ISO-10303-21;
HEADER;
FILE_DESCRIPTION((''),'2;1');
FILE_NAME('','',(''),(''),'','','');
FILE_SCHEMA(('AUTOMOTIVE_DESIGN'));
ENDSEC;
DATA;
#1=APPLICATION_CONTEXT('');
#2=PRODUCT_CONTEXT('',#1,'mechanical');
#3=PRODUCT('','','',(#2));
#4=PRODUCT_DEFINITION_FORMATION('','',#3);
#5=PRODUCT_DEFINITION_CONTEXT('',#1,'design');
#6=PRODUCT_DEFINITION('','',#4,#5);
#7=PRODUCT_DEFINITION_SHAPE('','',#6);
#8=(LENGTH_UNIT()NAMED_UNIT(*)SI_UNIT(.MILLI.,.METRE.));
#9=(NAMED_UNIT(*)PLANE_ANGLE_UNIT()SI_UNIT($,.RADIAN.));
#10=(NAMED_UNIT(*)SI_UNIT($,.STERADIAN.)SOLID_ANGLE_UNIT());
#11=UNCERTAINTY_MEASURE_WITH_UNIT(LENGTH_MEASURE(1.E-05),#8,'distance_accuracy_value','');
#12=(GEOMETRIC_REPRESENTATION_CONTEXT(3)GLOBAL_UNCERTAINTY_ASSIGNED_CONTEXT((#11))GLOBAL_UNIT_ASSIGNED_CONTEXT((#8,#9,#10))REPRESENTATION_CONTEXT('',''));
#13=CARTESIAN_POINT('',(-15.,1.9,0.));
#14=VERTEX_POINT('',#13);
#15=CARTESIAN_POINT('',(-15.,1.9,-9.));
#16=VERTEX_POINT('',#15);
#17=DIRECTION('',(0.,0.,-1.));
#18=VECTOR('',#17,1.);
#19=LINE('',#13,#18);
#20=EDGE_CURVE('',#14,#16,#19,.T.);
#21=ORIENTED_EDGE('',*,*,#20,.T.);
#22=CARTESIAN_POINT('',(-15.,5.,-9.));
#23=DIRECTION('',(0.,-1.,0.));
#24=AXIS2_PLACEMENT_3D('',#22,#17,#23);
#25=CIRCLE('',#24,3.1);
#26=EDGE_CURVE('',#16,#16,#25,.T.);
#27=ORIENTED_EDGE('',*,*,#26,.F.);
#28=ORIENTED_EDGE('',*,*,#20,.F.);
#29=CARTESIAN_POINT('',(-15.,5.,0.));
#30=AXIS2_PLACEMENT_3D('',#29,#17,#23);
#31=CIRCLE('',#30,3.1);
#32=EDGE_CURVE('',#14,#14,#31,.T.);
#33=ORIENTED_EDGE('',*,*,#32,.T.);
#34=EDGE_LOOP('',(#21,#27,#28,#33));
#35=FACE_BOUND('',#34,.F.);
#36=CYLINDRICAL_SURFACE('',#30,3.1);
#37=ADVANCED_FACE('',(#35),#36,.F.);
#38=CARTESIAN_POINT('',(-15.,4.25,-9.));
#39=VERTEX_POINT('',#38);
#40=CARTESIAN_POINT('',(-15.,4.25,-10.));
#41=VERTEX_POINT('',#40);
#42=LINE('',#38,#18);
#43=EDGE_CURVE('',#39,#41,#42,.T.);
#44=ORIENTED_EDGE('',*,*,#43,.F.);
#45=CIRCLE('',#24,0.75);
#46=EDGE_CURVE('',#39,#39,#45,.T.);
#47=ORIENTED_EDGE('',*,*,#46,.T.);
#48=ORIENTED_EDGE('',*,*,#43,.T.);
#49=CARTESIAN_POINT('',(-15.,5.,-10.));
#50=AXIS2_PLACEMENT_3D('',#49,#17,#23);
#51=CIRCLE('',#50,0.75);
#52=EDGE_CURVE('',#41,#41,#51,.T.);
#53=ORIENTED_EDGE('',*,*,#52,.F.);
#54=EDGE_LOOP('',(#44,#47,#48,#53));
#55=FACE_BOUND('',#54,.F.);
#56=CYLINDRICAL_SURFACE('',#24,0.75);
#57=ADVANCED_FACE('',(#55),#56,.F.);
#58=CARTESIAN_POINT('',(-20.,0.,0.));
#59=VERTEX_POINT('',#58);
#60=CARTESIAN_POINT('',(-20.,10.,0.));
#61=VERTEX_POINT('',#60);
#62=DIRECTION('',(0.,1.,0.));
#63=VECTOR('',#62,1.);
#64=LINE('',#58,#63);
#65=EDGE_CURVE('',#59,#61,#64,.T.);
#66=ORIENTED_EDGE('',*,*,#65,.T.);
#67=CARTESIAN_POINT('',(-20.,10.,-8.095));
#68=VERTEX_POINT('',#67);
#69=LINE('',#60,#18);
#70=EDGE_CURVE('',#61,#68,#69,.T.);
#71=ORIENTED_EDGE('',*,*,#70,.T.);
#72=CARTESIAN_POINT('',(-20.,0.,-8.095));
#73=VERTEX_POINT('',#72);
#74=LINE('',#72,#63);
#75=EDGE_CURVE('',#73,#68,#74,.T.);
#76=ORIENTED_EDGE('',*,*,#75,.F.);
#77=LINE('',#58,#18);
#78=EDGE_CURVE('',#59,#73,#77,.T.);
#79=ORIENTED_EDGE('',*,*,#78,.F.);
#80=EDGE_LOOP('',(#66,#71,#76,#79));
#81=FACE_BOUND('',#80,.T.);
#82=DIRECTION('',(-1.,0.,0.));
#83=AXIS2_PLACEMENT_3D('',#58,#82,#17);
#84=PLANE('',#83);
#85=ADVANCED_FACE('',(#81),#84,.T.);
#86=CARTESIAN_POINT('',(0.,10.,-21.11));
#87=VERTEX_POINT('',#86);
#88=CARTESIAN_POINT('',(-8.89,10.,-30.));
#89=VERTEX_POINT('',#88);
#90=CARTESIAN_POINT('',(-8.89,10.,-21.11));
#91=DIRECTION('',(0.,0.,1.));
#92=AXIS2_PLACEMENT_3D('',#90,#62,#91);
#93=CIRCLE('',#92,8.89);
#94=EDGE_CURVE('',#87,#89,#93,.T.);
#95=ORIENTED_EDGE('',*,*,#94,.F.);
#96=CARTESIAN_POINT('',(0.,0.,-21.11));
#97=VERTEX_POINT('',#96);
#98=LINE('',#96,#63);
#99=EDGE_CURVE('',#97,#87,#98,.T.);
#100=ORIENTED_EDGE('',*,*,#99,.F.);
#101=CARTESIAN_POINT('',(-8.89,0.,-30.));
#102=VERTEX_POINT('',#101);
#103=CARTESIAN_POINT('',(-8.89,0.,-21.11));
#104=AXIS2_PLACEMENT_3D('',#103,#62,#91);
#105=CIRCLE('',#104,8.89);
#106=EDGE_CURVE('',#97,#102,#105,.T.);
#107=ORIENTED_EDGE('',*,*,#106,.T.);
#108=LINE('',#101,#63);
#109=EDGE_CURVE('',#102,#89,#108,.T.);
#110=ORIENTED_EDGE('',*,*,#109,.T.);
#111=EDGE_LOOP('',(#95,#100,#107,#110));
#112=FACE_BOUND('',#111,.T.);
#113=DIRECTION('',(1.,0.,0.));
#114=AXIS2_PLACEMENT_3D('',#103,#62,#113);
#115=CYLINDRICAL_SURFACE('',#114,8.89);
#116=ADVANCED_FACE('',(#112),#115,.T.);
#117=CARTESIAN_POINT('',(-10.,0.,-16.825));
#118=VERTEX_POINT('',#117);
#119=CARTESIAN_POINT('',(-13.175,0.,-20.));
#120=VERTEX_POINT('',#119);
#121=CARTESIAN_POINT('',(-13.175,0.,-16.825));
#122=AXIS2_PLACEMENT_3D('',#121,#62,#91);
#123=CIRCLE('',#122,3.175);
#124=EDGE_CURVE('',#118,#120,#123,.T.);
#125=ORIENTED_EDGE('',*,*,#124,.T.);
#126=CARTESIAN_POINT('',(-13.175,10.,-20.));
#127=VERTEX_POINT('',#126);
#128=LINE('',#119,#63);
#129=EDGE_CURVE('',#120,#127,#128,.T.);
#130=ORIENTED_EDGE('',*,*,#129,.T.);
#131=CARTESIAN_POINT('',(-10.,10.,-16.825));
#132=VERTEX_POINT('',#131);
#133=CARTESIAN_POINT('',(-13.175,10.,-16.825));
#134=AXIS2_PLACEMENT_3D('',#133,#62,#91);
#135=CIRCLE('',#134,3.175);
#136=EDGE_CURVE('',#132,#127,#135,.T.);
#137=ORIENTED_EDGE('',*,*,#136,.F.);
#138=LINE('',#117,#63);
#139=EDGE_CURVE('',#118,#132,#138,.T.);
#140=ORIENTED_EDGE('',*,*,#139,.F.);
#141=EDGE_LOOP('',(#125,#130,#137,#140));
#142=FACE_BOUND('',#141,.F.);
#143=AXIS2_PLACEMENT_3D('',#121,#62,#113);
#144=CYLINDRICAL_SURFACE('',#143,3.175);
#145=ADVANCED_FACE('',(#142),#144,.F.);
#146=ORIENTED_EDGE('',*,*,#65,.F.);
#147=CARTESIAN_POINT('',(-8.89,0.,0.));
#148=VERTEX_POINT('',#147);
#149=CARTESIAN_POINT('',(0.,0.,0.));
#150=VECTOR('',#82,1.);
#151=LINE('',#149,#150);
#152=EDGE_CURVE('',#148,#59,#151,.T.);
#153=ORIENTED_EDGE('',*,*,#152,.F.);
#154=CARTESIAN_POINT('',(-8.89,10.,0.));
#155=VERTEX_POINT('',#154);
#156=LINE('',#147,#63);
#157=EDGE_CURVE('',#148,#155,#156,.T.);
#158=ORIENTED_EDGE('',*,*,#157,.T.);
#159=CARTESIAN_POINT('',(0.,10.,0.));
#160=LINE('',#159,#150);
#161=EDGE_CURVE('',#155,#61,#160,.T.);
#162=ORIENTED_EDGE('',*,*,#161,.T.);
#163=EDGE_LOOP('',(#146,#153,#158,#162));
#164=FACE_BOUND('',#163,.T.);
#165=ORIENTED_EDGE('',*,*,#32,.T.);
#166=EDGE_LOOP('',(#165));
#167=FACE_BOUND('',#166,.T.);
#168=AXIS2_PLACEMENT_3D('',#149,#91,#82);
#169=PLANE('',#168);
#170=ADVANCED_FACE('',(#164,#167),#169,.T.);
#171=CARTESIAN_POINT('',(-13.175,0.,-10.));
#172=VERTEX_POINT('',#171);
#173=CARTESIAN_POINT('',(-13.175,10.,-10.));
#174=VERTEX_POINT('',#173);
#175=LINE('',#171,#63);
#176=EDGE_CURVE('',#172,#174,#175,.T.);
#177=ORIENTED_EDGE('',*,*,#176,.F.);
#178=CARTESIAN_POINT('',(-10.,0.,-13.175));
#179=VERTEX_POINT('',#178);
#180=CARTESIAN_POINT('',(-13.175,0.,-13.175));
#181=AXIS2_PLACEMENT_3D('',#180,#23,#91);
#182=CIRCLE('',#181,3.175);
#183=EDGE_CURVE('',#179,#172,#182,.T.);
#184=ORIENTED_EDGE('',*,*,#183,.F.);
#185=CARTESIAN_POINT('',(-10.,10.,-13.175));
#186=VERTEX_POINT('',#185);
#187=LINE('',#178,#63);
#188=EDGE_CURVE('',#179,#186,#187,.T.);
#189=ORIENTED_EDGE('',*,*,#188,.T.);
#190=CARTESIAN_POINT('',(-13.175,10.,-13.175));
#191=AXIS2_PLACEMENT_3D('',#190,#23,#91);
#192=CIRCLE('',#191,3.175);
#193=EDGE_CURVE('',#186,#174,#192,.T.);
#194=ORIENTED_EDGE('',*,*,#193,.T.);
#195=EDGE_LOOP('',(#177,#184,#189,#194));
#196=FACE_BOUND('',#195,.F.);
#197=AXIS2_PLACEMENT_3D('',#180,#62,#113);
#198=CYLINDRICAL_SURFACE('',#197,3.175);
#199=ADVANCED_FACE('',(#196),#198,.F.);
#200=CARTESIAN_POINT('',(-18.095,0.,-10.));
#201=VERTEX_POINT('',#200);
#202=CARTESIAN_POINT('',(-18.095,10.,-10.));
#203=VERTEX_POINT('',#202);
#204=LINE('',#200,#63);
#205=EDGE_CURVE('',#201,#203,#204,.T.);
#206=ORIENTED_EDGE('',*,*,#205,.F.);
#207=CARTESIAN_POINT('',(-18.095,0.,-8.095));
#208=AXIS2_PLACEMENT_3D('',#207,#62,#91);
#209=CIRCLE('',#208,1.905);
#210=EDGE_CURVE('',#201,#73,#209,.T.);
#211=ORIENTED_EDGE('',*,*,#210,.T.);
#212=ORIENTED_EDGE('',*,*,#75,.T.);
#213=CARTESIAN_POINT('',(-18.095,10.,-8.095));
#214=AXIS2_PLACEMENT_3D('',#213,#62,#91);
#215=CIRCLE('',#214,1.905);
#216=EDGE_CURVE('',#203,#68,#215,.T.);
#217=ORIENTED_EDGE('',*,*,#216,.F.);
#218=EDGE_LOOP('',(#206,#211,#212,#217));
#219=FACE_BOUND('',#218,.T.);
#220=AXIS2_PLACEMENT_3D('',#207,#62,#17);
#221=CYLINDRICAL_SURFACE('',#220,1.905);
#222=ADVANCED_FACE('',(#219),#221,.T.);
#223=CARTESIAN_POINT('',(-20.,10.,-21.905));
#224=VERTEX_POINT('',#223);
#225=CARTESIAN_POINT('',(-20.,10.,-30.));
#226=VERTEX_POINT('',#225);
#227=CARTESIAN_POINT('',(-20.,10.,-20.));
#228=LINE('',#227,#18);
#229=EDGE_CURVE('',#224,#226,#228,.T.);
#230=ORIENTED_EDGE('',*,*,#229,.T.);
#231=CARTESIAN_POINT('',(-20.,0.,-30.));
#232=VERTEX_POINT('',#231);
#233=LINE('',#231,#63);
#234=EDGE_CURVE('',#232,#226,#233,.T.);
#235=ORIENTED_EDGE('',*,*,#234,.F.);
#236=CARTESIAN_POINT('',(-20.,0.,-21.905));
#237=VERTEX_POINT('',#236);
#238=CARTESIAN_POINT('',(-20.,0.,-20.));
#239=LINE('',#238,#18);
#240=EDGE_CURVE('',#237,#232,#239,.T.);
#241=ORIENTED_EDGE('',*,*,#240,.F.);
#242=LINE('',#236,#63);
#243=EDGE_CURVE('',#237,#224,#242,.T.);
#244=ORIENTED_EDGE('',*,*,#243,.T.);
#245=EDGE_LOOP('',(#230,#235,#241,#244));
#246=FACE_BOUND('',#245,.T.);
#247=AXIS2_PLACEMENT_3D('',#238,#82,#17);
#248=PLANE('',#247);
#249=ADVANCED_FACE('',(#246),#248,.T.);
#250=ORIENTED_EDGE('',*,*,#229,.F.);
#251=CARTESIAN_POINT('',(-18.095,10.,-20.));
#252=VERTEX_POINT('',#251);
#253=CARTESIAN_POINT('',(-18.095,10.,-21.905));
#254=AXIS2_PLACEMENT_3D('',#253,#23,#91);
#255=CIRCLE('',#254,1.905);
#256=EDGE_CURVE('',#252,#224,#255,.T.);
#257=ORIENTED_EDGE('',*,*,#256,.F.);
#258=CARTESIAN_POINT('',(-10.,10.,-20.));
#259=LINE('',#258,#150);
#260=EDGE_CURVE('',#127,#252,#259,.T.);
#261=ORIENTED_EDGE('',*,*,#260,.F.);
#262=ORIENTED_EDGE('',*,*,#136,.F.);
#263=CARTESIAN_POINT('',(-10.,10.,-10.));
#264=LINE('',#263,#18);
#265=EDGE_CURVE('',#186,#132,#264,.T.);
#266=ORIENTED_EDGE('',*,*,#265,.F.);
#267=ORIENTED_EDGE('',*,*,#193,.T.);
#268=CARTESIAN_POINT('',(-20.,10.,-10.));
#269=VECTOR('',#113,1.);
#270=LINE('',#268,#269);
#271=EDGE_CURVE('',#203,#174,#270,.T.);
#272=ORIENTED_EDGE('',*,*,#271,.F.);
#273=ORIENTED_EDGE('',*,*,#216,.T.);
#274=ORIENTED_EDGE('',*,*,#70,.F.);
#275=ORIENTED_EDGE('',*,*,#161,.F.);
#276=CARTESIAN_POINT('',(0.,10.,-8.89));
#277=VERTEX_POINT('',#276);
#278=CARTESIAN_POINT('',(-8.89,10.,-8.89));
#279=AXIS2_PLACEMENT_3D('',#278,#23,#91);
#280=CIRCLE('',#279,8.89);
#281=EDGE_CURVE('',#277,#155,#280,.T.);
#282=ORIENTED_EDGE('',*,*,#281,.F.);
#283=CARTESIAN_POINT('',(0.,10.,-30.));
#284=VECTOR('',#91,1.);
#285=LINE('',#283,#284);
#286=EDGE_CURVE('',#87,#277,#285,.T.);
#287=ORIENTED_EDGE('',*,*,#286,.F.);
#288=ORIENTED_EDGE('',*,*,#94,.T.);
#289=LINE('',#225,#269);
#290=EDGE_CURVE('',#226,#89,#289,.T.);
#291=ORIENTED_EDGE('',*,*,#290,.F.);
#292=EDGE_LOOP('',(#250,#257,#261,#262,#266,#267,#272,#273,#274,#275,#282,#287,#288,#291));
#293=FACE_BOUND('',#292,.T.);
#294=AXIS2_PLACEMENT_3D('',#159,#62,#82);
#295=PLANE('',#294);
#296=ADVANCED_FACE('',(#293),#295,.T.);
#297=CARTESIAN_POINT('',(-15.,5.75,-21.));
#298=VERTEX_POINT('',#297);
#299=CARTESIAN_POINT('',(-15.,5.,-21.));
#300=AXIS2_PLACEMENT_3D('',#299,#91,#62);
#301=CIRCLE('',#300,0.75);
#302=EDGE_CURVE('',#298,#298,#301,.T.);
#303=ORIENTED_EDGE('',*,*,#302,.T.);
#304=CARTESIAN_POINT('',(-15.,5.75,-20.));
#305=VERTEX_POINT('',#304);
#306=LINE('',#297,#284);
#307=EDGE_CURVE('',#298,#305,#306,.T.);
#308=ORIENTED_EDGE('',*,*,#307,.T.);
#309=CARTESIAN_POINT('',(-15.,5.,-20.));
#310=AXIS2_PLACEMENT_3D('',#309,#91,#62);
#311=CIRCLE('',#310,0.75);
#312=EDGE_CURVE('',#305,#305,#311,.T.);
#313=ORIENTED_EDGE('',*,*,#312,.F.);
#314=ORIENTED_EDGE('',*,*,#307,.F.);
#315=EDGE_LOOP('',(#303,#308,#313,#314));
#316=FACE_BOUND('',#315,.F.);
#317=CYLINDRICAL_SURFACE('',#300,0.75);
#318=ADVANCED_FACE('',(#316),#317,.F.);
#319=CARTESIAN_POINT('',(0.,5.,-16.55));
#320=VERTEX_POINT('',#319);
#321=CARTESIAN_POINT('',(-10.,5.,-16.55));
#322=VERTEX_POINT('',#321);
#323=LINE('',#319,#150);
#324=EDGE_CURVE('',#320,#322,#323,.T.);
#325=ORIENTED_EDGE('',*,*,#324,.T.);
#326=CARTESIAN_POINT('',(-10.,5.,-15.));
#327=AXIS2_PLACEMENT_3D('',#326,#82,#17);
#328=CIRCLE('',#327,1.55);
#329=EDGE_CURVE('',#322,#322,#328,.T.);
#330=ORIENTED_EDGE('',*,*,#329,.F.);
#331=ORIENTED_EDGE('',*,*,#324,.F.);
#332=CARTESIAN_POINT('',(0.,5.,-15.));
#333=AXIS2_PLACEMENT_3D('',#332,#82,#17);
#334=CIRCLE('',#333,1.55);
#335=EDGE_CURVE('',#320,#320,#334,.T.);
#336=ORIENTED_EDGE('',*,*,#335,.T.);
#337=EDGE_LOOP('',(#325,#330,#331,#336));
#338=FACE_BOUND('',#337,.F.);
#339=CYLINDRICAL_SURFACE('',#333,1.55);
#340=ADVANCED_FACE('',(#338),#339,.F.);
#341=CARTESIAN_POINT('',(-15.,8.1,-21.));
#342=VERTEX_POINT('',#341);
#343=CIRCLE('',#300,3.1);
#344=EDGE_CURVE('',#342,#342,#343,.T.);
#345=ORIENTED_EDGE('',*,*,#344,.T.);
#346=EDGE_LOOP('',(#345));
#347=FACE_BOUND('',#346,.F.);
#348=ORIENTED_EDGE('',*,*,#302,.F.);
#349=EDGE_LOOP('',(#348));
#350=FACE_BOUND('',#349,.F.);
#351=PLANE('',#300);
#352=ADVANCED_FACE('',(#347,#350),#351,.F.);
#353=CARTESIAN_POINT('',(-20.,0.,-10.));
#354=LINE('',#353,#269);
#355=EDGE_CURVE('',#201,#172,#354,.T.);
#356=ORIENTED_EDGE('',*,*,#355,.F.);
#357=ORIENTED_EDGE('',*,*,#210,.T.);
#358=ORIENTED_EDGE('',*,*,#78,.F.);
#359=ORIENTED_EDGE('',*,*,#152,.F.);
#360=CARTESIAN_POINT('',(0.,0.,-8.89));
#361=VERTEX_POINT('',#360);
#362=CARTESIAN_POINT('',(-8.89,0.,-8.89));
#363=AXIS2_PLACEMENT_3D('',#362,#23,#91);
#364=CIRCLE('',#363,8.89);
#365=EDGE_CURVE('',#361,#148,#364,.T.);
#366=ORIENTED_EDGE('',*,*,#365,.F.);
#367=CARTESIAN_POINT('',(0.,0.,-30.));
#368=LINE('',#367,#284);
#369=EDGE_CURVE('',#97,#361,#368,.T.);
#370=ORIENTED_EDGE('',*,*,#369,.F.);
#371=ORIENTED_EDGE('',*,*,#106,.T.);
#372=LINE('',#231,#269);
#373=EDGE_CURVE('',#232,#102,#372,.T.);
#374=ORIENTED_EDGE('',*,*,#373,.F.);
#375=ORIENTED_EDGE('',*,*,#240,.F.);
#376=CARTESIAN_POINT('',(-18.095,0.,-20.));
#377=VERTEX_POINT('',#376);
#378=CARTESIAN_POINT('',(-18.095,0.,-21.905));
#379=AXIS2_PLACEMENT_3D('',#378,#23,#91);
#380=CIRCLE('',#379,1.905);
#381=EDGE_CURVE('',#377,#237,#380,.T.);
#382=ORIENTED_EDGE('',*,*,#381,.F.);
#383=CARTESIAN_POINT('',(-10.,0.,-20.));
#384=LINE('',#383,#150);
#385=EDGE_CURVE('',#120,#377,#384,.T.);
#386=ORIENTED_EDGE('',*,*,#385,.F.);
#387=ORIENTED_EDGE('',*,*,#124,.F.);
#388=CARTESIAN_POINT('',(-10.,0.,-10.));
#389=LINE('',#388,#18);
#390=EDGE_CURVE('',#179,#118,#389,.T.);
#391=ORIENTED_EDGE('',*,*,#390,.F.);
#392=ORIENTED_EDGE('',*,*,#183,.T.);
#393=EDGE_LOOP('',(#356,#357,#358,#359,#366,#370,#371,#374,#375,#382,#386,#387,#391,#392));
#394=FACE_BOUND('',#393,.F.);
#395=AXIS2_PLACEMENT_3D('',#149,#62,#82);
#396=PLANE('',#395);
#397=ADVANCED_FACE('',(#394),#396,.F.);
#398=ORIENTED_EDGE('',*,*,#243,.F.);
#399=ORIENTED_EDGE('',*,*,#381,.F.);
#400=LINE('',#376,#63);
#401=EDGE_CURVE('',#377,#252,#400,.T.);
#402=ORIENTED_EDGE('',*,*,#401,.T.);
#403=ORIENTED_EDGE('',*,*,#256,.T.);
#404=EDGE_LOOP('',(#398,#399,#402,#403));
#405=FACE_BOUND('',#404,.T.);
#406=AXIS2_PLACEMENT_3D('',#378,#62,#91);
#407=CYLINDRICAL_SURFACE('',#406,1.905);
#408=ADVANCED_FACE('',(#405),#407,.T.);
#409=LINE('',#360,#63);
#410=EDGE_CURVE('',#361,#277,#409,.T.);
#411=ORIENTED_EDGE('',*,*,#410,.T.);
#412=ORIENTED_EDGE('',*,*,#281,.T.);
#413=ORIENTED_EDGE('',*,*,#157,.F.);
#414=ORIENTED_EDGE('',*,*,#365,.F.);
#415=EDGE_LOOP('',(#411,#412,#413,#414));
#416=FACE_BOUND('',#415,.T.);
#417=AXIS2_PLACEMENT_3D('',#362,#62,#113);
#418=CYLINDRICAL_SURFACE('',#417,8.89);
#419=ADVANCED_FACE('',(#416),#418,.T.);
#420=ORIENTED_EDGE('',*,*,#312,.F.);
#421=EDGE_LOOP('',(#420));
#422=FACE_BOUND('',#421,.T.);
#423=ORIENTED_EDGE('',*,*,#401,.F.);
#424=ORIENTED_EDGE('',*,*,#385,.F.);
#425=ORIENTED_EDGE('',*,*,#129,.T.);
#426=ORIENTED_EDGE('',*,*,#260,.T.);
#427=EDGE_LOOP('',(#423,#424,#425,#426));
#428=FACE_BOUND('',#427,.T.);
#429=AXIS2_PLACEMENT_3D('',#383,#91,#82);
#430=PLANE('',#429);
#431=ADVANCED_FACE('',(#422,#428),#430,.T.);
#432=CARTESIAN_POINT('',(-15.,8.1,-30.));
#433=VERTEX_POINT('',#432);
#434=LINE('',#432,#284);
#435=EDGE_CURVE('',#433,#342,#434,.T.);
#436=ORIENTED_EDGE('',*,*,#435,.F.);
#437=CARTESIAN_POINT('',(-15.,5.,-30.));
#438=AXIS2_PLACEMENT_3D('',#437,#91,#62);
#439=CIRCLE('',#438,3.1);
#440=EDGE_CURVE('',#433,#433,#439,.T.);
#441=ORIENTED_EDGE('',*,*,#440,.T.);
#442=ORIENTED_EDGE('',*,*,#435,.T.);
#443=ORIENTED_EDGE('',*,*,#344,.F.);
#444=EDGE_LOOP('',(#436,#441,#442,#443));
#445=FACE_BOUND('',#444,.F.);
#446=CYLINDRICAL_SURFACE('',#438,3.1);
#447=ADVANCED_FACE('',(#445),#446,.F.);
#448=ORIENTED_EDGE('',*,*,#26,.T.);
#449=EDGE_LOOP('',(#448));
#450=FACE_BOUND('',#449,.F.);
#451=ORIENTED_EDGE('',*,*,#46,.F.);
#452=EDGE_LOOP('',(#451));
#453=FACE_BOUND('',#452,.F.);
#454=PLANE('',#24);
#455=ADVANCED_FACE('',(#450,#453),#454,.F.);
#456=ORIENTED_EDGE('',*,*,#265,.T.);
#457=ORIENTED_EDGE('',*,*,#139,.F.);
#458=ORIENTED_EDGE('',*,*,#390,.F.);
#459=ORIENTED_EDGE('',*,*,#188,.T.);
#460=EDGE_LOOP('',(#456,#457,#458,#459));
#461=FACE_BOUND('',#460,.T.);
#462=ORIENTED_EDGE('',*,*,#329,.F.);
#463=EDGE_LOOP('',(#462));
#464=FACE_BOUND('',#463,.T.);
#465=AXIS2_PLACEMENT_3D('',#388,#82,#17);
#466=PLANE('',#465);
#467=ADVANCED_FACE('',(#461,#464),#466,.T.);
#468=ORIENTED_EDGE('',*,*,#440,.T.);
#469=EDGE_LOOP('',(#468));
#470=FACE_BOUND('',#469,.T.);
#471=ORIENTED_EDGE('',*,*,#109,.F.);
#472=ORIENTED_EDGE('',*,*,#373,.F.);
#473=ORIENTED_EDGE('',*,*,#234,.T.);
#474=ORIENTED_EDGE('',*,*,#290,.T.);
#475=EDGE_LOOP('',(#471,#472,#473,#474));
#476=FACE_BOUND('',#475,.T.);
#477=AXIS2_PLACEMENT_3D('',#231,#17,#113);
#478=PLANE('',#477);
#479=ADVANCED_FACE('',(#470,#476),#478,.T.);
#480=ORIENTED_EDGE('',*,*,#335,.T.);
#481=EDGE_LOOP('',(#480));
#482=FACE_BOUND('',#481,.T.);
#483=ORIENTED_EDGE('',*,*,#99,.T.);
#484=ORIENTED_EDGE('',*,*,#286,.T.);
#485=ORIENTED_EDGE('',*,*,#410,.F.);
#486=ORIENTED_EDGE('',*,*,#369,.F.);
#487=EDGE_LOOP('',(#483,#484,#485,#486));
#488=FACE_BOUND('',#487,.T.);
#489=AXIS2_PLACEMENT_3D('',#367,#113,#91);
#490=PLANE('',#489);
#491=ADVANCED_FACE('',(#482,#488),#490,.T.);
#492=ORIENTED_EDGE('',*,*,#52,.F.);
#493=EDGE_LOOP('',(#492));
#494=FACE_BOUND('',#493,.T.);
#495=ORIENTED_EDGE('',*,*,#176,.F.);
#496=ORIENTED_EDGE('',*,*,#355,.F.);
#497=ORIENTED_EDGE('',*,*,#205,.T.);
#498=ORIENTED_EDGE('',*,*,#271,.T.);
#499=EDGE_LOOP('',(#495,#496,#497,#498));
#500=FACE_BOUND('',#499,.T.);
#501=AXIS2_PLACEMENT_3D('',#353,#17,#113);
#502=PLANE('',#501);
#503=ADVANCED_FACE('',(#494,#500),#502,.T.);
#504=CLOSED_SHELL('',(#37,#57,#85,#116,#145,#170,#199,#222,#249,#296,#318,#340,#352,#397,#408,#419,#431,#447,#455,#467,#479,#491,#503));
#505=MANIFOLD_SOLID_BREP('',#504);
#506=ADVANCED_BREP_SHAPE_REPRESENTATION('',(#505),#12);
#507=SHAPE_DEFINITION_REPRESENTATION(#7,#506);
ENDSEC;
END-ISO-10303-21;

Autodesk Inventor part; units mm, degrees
ref_plane "YZ Plane" through (0, 0, 0) normal (1, 0, 0) x (0, 1, 0)
ref_plane "XZ Plane" through (0, 0, 0) normal (0, 1, 0) x (-1, 0, 0)
ref_plane "XY Plane" through (0, 0, 0) normal (0, 0, 1) x (1, 0, 0)
sketch "Sketch1" plane through (0, 0, 0) normal (0, 1, 0) x (-1, 0, 0)
  line L0 (0, 0) -> (20, 0)
  line L1 (20, -30) -> (0, -30)
  line L2 (0, -30) -> (0, 0)
  line L3 (20, 0) -> (20, -10)
  line L4 (20, -10) -> (10, -10)
  line L5 (10, -10) -> (10, -20)
  line L6 (10, -20) -> (20, -20)
  line L7 (20, -20) -> (20, -30)
  dimension "d0" = 20
  dimension "d1" = 30
  dimension "d2" = 10
  dimension "d3" = 10
  dimension "d4" = 10
  dimension "d5" = 10
  dimension "d8" = 20
extrude "Extrusion1" add sketch "Sketch1" along normal blind 10
sketch "Sketch2" plane through (-20, 0, 0) normal (0, 0, 1) x (1, 0, 0)
  line L0 (0, 0) -> (0, 10) projected
  line L1 (0, 10) -> (20, 10) projected
  point P0 (20, 0)
  point P1 (5, 5)
  dimension "d16" = 5
  dimension "d17" = 5
hole "Hole1" at (-15, 5, 0) direction (0, 0, -1) diameter 1.5 depth 11 counterbore diameter 6.2 counterbore depth 9
sketch "Sketch3" plane through (0, 0, -30) normal (0, 0, -1) x (-1, 0, 0)
  line L0 (20, 0) -> (20, 10) projected
  line L1 (0, 10) -> (20, 10) projected
  point P0 (0, 0)
  point P1 (15, 5)
  dimension "d25" = 5
  dimension "d26" = 5
hole "Hole2" at (-15, 5, -30) direction (0, 0, 1) diameter 1.5 depth 11 counterbore diameter 6.2 counterbore depth 9
sketch "Sketch4" plane through (0, 0, 0) normal (1, 0, 0) x (0, 0, -1)
  line L0 (0, 10) -> (30, 10) projected
  line L1 (30, 0) -> (30, 10) projected
  point P0 (0, 0)
  point P1 (15, 5)
  dimension "d34" = 5
  dimension "d35" = 15
hole "Hole3" at (0, 5, -15) direction (-1, 0, 0) diameter 3.1 depth 20
fillet "Fillet1" radius 3.175 1 edges at (-10, 5, -20)
fillet "Fillet2" radius 3.175 1 edges at (-10, 5, -10)
fillet "Fillet3" radius 1.905 1 edges at (-20, 5, -20)
fillet "Fillet4" radius 1.905 1 edges at (-20, 5, -10)
fillet "Fillet5" radius 8.89 1 edges at (0, 5, -30)
fillet "Fillet6" radius 8.89 1 edges at (0, 5, 0)
properties part number "lickPort1"
